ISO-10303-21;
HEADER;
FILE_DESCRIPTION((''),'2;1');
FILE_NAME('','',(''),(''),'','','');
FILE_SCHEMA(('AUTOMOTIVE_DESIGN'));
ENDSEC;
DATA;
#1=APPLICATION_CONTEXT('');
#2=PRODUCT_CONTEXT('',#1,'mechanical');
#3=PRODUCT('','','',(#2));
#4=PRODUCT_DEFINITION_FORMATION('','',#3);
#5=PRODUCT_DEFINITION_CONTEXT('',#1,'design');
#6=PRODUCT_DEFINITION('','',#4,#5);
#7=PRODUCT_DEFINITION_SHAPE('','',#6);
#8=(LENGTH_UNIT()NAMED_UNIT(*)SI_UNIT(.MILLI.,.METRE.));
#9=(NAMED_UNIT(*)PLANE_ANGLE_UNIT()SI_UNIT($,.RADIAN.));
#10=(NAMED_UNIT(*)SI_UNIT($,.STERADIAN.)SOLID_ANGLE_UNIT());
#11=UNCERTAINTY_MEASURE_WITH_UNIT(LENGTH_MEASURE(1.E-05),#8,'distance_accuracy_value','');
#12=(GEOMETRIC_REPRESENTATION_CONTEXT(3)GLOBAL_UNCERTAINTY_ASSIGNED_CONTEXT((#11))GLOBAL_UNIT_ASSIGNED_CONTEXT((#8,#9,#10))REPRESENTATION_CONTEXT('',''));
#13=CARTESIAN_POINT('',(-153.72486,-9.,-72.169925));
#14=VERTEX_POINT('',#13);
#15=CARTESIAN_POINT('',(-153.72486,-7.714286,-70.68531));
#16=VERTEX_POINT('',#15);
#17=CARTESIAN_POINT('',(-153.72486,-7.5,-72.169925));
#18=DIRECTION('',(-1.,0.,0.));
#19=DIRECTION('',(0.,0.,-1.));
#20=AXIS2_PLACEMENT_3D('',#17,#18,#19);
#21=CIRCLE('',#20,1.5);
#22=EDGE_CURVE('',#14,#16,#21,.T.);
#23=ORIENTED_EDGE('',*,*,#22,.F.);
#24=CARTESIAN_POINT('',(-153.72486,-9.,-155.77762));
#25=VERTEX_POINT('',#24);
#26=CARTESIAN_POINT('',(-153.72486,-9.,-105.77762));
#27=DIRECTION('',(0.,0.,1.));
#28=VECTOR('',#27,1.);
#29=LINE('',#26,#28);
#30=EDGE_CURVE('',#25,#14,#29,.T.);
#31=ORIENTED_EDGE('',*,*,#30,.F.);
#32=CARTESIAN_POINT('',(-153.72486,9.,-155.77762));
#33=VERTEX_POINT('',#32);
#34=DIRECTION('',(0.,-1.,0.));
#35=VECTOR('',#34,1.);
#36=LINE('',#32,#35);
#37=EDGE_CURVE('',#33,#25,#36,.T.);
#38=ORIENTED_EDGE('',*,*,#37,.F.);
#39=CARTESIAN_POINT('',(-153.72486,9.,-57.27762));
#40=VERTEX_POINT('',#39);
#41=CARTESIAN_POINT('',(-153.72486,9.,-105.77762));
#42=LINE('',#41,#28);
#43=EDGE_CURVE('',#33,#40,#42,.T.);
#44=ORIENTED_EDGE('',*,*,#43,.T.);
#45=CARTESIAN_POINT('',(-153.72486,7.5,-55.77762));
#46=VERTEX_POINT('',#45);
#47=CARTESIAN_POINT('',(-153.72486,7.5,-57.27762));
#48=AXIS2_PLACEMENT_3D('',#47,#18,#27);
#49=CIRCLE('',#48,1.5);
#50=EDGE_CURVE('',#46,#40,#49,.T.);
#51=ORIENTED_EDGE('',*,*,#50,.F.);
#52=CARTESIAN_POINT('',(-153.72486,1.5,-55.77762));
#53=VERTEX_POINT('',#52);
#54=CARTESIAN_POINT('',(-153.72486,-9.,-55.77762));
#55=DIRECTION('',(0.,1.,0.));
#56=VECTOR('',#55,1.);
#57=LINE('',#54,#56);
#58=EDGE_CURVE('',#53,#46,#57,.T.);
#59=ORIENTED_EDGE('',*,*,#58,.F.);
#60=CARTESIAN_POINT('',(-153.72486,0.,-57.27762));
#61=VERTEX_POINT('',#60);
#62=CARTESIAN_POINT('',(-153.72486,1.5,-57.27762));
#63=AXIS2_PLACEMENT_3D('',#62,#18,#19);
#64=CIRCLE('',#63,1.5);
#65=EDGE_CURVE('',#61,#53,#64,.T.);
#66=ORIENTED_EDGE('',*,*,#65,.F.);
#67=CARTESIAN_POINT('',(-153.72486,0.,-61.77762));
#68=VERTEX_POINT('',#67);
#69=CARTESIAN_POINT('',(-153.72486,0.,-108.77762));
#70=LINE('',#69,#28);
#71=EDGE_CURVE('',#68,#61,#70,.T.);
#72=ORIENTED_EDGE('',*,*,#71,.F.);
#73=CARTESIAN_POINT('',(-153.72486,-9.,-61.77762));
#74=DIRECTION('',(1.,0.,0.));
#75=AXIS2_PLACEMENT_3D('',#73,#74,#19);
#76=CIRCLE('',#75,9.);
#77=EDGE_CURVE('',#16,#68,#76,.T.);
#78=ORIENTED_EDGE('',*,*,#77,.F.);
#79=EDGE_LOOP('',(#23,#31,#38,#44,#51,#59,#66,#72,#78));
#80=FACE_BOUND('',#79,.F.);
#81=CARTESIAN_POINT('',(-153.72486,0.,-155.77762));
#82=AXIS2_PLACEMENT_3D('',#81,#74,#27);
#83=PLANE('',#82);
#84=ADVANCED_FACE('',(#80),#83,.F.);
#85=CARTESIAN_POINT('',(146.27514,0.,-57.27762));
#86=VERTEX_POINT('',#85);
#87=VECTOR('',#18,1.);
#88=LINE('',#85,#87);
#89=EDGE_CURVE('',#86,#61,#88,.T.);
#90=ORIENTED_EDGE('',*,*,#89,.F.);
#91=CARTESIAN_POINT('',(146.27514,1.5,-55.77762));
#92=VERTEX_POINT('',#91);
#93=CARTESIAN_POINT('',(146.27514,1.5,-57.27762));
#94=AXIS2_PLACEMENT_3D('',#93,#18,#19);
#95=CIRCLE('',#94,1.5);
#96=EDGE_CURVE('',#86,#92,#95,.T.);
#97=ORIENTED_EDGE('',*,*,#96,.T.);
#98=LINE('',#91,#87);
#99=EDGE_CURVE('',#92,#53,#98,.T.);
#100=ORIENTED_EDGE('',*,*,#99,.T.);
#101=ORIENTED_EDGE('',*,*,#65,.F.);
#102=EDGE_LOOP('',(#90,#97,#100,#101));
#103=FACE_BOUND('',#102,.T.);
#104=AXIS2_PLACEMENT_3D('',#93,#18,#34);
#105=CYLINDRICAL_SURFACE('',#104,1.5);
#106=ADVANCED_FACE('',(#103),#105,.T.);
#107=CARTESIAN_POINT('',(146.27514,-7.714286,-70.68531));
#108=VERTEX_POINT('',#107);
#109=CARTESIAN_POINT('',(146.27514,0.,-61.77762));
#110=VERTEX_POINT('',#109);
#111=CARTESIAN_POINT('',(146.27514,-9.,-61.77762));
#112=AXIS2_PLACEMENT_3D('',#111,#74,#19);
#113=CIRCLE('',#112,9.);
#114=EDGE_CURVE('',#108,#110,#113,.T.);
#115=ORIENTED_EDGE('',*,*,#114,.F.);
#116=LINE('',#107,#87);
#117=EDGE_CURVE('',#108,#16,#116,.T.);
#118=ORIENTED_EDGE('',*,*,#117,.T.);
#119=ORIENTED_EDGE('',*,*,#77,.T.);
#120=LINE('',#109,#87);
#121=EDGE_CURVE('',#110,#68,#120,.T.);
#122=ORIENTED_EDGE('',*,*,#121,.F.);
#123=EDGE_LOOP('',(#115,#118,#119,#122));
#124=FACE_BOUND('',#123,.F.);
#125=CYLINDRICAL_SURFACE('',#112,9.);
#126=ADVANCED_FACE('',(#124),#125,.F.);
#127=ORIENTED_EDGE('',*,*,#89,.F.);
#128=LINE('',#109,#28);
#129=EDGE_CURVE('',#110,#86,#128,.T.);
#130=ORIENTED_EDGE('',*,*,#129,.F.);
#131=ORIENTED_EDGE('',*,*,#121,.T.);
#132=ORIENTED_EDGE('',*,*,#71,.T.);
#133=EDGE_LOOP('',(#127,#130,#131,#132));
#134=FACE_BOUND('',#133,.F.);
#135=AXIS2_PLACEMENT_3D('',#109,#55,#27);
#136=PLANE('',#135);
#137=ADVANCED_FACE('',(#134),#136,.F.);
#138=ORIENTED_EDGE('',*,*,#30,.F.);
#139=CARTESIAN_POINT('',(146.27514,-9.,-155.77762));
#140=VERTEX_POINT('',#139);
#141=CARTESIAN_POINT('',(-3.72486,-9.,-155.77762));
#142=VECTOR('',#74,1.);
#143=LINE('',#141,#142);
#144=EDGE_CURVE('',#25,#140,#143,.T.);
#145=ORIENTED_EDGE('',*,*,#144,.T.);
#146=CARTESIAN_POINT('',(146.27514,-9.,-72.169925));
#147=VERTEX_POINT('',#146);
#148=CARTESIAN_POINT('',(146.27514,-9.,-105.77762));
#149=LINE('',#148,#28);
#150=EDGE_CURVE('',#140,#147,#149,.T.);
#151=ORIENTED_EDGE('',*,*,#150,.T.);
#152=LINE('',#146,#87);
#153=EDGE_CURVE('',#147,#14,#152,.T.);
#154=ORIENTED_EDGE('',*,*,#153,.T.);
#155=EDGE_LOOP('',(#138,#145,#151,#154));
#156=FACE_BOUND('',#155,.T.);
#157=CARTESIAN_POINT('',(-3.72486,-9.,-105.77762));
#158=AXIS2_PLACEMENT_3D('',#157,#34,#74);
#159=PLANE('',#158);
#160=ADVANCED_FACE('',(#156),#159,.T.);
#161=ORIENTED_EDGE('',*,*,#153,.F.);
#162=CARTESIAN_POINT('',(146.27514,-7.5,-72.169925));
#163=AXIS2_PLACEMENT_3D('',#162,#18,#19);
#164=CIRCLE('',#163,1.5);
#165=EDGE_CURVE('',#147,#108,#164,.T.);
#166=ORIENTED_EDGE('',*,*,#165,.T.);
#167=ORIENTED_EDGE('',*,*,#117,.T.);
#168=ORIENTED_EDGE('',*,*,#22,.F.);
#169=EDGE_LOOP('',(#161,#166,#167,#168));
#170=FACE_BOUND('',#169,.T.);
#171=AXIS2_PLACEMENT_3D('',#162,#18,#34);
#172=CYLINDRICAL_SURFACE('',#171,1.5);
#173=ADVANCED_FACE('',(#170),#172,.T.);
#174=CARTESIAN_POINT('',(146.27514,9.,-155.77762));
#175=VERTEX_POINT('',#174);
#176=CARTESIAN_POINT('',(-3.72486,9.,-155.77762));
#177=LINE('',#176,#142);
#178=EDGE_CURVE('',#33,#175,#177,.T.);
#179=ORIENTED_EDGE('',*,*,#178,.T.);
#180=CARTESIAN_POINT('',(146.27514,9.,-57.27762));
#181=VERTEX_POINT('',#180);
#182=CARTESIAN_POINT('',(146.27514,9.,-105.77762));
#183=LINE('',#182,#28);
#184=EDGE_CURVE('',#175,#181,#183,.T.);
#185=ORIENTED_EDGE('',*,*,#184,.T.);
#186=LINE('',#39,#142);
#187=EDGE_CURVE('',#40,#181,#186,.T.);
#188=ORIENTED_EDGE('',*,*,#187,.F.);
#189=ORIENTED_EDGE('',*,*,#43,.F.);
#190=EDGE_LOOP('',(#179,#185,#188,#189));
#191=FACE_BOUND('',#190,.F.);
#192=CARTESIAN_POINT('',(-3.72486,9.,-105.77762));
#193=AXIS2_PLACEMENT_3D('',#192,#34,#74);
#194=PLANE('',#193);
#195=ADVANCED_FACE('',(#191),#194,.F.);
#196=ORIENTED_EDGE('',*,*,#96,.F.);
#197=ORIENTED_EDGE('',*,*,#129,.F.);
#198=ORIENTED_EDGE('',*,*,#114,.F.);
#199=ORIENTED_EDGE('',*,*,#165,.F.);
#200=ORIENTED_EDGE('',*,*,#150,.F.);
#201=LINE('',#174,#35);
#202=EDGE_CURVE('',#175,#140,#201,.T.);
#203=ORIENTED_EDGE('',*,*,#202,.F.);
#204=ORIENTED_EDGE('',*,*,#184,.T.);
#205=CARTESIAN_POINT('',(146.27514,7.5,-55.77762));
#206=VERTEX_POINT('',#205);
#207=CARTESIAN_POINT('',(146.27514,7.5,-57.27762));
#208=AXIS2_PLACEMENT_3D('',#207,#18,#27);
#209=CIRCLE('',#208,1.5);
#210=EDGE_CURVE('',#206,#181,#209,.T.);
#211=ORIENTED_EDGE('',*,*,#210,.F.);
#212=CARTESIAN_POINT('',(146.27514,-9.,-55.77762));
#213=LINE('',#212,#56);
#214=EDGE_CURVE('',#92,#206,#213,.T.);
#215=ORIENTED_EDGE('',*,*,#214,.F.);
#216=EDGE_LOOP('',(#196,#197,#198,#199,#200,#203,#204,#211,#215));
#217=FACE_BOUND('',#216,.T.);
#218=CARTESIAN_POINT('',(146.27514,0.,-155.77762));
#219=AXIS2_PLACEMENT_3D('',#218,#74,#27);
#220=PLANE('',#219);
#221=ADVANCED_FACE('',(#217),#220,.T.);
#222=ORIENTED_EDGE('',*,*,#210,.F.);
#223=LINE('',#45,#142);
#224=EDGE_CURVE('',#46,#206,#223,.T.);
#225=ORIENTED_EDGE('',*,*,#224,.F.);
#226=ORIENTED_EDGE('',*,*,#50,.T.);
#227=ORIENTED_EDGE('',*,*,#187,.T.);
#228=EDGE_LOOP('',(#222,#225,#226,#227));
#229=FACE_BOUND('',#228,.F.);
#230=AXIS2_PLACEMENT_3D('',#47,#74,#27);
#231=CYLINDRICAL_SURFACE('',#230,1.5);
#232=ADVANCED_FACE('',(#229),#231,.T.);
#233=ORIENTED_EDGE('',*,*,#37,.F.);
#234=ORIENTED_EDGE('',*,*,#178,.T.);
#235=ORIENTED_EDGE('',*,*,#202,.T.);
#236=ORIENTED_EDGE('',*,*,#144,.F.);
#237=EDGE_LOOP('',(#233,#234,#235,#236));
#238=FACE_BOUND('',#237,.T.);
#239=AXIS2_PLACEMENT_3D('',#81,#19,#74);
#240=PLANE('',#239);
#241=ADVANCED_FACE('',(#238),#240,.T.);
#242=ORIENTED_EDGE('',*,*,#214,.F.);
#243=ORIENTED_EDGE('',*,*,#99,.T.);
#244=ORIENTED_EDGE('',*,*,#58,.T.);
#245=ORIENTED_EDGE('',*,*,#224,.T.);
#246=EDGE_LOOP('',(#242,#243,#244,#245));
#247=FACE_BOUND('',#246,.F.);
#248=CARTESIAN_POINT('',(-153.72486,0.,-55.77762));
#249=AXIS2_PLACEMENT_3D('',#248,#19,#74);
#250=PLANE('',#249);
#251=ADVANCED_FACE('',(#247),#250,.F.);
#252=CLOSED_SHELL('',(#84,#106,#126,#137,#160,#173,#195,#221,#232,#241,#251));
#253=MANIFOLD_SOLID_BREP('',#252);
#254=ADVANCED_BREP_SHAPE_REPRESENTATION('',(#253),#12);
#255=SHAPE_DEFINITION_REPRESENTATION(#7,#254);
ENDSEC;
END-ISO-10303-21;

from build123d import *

# Parameters (mm, degrees)
F0_W     = 300
F0_H     = 100
F1_DEPTH = 9
F3_DEPTH = 300.001
F4_R     = 1.5


with BuildPart() as f1:
    # F0 (on Front) → F1 (new body, symmetric)
    with BuildSketch(Plane.XZ):
        with Locations((-3.7248600274, -105.7776198197)):
            Rectangle(F0_W, F0_H)
    extrude(amount=F1_DEPTH, both=True)

    # F2 (on face) → F3 (cut, through all)
    with BuildSketch(Plane.YZ.offset(146.2751399726)):
        with BuildLine():
            Line((0, -61.7776198197), (0, -55.7776198197))
            Line((0, -55.7776198197), (-9, -55.7776198197))
            Line((-9, -55.7776198197), (-9, -70.7776198197))
            ThreePointArc((-9, -70.7776198197), (-2.6360389693, -68.1415808503), (0, -61.7776198197))
        make_face()
    extrude(amount=-F3_DEPTH, mode=Mode.SUBTRACT)

    # F4
    f4_edges = [f1.edges().sort_by_distance(p)[0] for p in [
        (-3.72486, 0, -55.77762),
        (-3.72486, 9, -55.77762),
        (-3.72486, -9, -70.77762),
    ]]
    fillet(f4_edges, radius=F4_R)


solid = f1.part
